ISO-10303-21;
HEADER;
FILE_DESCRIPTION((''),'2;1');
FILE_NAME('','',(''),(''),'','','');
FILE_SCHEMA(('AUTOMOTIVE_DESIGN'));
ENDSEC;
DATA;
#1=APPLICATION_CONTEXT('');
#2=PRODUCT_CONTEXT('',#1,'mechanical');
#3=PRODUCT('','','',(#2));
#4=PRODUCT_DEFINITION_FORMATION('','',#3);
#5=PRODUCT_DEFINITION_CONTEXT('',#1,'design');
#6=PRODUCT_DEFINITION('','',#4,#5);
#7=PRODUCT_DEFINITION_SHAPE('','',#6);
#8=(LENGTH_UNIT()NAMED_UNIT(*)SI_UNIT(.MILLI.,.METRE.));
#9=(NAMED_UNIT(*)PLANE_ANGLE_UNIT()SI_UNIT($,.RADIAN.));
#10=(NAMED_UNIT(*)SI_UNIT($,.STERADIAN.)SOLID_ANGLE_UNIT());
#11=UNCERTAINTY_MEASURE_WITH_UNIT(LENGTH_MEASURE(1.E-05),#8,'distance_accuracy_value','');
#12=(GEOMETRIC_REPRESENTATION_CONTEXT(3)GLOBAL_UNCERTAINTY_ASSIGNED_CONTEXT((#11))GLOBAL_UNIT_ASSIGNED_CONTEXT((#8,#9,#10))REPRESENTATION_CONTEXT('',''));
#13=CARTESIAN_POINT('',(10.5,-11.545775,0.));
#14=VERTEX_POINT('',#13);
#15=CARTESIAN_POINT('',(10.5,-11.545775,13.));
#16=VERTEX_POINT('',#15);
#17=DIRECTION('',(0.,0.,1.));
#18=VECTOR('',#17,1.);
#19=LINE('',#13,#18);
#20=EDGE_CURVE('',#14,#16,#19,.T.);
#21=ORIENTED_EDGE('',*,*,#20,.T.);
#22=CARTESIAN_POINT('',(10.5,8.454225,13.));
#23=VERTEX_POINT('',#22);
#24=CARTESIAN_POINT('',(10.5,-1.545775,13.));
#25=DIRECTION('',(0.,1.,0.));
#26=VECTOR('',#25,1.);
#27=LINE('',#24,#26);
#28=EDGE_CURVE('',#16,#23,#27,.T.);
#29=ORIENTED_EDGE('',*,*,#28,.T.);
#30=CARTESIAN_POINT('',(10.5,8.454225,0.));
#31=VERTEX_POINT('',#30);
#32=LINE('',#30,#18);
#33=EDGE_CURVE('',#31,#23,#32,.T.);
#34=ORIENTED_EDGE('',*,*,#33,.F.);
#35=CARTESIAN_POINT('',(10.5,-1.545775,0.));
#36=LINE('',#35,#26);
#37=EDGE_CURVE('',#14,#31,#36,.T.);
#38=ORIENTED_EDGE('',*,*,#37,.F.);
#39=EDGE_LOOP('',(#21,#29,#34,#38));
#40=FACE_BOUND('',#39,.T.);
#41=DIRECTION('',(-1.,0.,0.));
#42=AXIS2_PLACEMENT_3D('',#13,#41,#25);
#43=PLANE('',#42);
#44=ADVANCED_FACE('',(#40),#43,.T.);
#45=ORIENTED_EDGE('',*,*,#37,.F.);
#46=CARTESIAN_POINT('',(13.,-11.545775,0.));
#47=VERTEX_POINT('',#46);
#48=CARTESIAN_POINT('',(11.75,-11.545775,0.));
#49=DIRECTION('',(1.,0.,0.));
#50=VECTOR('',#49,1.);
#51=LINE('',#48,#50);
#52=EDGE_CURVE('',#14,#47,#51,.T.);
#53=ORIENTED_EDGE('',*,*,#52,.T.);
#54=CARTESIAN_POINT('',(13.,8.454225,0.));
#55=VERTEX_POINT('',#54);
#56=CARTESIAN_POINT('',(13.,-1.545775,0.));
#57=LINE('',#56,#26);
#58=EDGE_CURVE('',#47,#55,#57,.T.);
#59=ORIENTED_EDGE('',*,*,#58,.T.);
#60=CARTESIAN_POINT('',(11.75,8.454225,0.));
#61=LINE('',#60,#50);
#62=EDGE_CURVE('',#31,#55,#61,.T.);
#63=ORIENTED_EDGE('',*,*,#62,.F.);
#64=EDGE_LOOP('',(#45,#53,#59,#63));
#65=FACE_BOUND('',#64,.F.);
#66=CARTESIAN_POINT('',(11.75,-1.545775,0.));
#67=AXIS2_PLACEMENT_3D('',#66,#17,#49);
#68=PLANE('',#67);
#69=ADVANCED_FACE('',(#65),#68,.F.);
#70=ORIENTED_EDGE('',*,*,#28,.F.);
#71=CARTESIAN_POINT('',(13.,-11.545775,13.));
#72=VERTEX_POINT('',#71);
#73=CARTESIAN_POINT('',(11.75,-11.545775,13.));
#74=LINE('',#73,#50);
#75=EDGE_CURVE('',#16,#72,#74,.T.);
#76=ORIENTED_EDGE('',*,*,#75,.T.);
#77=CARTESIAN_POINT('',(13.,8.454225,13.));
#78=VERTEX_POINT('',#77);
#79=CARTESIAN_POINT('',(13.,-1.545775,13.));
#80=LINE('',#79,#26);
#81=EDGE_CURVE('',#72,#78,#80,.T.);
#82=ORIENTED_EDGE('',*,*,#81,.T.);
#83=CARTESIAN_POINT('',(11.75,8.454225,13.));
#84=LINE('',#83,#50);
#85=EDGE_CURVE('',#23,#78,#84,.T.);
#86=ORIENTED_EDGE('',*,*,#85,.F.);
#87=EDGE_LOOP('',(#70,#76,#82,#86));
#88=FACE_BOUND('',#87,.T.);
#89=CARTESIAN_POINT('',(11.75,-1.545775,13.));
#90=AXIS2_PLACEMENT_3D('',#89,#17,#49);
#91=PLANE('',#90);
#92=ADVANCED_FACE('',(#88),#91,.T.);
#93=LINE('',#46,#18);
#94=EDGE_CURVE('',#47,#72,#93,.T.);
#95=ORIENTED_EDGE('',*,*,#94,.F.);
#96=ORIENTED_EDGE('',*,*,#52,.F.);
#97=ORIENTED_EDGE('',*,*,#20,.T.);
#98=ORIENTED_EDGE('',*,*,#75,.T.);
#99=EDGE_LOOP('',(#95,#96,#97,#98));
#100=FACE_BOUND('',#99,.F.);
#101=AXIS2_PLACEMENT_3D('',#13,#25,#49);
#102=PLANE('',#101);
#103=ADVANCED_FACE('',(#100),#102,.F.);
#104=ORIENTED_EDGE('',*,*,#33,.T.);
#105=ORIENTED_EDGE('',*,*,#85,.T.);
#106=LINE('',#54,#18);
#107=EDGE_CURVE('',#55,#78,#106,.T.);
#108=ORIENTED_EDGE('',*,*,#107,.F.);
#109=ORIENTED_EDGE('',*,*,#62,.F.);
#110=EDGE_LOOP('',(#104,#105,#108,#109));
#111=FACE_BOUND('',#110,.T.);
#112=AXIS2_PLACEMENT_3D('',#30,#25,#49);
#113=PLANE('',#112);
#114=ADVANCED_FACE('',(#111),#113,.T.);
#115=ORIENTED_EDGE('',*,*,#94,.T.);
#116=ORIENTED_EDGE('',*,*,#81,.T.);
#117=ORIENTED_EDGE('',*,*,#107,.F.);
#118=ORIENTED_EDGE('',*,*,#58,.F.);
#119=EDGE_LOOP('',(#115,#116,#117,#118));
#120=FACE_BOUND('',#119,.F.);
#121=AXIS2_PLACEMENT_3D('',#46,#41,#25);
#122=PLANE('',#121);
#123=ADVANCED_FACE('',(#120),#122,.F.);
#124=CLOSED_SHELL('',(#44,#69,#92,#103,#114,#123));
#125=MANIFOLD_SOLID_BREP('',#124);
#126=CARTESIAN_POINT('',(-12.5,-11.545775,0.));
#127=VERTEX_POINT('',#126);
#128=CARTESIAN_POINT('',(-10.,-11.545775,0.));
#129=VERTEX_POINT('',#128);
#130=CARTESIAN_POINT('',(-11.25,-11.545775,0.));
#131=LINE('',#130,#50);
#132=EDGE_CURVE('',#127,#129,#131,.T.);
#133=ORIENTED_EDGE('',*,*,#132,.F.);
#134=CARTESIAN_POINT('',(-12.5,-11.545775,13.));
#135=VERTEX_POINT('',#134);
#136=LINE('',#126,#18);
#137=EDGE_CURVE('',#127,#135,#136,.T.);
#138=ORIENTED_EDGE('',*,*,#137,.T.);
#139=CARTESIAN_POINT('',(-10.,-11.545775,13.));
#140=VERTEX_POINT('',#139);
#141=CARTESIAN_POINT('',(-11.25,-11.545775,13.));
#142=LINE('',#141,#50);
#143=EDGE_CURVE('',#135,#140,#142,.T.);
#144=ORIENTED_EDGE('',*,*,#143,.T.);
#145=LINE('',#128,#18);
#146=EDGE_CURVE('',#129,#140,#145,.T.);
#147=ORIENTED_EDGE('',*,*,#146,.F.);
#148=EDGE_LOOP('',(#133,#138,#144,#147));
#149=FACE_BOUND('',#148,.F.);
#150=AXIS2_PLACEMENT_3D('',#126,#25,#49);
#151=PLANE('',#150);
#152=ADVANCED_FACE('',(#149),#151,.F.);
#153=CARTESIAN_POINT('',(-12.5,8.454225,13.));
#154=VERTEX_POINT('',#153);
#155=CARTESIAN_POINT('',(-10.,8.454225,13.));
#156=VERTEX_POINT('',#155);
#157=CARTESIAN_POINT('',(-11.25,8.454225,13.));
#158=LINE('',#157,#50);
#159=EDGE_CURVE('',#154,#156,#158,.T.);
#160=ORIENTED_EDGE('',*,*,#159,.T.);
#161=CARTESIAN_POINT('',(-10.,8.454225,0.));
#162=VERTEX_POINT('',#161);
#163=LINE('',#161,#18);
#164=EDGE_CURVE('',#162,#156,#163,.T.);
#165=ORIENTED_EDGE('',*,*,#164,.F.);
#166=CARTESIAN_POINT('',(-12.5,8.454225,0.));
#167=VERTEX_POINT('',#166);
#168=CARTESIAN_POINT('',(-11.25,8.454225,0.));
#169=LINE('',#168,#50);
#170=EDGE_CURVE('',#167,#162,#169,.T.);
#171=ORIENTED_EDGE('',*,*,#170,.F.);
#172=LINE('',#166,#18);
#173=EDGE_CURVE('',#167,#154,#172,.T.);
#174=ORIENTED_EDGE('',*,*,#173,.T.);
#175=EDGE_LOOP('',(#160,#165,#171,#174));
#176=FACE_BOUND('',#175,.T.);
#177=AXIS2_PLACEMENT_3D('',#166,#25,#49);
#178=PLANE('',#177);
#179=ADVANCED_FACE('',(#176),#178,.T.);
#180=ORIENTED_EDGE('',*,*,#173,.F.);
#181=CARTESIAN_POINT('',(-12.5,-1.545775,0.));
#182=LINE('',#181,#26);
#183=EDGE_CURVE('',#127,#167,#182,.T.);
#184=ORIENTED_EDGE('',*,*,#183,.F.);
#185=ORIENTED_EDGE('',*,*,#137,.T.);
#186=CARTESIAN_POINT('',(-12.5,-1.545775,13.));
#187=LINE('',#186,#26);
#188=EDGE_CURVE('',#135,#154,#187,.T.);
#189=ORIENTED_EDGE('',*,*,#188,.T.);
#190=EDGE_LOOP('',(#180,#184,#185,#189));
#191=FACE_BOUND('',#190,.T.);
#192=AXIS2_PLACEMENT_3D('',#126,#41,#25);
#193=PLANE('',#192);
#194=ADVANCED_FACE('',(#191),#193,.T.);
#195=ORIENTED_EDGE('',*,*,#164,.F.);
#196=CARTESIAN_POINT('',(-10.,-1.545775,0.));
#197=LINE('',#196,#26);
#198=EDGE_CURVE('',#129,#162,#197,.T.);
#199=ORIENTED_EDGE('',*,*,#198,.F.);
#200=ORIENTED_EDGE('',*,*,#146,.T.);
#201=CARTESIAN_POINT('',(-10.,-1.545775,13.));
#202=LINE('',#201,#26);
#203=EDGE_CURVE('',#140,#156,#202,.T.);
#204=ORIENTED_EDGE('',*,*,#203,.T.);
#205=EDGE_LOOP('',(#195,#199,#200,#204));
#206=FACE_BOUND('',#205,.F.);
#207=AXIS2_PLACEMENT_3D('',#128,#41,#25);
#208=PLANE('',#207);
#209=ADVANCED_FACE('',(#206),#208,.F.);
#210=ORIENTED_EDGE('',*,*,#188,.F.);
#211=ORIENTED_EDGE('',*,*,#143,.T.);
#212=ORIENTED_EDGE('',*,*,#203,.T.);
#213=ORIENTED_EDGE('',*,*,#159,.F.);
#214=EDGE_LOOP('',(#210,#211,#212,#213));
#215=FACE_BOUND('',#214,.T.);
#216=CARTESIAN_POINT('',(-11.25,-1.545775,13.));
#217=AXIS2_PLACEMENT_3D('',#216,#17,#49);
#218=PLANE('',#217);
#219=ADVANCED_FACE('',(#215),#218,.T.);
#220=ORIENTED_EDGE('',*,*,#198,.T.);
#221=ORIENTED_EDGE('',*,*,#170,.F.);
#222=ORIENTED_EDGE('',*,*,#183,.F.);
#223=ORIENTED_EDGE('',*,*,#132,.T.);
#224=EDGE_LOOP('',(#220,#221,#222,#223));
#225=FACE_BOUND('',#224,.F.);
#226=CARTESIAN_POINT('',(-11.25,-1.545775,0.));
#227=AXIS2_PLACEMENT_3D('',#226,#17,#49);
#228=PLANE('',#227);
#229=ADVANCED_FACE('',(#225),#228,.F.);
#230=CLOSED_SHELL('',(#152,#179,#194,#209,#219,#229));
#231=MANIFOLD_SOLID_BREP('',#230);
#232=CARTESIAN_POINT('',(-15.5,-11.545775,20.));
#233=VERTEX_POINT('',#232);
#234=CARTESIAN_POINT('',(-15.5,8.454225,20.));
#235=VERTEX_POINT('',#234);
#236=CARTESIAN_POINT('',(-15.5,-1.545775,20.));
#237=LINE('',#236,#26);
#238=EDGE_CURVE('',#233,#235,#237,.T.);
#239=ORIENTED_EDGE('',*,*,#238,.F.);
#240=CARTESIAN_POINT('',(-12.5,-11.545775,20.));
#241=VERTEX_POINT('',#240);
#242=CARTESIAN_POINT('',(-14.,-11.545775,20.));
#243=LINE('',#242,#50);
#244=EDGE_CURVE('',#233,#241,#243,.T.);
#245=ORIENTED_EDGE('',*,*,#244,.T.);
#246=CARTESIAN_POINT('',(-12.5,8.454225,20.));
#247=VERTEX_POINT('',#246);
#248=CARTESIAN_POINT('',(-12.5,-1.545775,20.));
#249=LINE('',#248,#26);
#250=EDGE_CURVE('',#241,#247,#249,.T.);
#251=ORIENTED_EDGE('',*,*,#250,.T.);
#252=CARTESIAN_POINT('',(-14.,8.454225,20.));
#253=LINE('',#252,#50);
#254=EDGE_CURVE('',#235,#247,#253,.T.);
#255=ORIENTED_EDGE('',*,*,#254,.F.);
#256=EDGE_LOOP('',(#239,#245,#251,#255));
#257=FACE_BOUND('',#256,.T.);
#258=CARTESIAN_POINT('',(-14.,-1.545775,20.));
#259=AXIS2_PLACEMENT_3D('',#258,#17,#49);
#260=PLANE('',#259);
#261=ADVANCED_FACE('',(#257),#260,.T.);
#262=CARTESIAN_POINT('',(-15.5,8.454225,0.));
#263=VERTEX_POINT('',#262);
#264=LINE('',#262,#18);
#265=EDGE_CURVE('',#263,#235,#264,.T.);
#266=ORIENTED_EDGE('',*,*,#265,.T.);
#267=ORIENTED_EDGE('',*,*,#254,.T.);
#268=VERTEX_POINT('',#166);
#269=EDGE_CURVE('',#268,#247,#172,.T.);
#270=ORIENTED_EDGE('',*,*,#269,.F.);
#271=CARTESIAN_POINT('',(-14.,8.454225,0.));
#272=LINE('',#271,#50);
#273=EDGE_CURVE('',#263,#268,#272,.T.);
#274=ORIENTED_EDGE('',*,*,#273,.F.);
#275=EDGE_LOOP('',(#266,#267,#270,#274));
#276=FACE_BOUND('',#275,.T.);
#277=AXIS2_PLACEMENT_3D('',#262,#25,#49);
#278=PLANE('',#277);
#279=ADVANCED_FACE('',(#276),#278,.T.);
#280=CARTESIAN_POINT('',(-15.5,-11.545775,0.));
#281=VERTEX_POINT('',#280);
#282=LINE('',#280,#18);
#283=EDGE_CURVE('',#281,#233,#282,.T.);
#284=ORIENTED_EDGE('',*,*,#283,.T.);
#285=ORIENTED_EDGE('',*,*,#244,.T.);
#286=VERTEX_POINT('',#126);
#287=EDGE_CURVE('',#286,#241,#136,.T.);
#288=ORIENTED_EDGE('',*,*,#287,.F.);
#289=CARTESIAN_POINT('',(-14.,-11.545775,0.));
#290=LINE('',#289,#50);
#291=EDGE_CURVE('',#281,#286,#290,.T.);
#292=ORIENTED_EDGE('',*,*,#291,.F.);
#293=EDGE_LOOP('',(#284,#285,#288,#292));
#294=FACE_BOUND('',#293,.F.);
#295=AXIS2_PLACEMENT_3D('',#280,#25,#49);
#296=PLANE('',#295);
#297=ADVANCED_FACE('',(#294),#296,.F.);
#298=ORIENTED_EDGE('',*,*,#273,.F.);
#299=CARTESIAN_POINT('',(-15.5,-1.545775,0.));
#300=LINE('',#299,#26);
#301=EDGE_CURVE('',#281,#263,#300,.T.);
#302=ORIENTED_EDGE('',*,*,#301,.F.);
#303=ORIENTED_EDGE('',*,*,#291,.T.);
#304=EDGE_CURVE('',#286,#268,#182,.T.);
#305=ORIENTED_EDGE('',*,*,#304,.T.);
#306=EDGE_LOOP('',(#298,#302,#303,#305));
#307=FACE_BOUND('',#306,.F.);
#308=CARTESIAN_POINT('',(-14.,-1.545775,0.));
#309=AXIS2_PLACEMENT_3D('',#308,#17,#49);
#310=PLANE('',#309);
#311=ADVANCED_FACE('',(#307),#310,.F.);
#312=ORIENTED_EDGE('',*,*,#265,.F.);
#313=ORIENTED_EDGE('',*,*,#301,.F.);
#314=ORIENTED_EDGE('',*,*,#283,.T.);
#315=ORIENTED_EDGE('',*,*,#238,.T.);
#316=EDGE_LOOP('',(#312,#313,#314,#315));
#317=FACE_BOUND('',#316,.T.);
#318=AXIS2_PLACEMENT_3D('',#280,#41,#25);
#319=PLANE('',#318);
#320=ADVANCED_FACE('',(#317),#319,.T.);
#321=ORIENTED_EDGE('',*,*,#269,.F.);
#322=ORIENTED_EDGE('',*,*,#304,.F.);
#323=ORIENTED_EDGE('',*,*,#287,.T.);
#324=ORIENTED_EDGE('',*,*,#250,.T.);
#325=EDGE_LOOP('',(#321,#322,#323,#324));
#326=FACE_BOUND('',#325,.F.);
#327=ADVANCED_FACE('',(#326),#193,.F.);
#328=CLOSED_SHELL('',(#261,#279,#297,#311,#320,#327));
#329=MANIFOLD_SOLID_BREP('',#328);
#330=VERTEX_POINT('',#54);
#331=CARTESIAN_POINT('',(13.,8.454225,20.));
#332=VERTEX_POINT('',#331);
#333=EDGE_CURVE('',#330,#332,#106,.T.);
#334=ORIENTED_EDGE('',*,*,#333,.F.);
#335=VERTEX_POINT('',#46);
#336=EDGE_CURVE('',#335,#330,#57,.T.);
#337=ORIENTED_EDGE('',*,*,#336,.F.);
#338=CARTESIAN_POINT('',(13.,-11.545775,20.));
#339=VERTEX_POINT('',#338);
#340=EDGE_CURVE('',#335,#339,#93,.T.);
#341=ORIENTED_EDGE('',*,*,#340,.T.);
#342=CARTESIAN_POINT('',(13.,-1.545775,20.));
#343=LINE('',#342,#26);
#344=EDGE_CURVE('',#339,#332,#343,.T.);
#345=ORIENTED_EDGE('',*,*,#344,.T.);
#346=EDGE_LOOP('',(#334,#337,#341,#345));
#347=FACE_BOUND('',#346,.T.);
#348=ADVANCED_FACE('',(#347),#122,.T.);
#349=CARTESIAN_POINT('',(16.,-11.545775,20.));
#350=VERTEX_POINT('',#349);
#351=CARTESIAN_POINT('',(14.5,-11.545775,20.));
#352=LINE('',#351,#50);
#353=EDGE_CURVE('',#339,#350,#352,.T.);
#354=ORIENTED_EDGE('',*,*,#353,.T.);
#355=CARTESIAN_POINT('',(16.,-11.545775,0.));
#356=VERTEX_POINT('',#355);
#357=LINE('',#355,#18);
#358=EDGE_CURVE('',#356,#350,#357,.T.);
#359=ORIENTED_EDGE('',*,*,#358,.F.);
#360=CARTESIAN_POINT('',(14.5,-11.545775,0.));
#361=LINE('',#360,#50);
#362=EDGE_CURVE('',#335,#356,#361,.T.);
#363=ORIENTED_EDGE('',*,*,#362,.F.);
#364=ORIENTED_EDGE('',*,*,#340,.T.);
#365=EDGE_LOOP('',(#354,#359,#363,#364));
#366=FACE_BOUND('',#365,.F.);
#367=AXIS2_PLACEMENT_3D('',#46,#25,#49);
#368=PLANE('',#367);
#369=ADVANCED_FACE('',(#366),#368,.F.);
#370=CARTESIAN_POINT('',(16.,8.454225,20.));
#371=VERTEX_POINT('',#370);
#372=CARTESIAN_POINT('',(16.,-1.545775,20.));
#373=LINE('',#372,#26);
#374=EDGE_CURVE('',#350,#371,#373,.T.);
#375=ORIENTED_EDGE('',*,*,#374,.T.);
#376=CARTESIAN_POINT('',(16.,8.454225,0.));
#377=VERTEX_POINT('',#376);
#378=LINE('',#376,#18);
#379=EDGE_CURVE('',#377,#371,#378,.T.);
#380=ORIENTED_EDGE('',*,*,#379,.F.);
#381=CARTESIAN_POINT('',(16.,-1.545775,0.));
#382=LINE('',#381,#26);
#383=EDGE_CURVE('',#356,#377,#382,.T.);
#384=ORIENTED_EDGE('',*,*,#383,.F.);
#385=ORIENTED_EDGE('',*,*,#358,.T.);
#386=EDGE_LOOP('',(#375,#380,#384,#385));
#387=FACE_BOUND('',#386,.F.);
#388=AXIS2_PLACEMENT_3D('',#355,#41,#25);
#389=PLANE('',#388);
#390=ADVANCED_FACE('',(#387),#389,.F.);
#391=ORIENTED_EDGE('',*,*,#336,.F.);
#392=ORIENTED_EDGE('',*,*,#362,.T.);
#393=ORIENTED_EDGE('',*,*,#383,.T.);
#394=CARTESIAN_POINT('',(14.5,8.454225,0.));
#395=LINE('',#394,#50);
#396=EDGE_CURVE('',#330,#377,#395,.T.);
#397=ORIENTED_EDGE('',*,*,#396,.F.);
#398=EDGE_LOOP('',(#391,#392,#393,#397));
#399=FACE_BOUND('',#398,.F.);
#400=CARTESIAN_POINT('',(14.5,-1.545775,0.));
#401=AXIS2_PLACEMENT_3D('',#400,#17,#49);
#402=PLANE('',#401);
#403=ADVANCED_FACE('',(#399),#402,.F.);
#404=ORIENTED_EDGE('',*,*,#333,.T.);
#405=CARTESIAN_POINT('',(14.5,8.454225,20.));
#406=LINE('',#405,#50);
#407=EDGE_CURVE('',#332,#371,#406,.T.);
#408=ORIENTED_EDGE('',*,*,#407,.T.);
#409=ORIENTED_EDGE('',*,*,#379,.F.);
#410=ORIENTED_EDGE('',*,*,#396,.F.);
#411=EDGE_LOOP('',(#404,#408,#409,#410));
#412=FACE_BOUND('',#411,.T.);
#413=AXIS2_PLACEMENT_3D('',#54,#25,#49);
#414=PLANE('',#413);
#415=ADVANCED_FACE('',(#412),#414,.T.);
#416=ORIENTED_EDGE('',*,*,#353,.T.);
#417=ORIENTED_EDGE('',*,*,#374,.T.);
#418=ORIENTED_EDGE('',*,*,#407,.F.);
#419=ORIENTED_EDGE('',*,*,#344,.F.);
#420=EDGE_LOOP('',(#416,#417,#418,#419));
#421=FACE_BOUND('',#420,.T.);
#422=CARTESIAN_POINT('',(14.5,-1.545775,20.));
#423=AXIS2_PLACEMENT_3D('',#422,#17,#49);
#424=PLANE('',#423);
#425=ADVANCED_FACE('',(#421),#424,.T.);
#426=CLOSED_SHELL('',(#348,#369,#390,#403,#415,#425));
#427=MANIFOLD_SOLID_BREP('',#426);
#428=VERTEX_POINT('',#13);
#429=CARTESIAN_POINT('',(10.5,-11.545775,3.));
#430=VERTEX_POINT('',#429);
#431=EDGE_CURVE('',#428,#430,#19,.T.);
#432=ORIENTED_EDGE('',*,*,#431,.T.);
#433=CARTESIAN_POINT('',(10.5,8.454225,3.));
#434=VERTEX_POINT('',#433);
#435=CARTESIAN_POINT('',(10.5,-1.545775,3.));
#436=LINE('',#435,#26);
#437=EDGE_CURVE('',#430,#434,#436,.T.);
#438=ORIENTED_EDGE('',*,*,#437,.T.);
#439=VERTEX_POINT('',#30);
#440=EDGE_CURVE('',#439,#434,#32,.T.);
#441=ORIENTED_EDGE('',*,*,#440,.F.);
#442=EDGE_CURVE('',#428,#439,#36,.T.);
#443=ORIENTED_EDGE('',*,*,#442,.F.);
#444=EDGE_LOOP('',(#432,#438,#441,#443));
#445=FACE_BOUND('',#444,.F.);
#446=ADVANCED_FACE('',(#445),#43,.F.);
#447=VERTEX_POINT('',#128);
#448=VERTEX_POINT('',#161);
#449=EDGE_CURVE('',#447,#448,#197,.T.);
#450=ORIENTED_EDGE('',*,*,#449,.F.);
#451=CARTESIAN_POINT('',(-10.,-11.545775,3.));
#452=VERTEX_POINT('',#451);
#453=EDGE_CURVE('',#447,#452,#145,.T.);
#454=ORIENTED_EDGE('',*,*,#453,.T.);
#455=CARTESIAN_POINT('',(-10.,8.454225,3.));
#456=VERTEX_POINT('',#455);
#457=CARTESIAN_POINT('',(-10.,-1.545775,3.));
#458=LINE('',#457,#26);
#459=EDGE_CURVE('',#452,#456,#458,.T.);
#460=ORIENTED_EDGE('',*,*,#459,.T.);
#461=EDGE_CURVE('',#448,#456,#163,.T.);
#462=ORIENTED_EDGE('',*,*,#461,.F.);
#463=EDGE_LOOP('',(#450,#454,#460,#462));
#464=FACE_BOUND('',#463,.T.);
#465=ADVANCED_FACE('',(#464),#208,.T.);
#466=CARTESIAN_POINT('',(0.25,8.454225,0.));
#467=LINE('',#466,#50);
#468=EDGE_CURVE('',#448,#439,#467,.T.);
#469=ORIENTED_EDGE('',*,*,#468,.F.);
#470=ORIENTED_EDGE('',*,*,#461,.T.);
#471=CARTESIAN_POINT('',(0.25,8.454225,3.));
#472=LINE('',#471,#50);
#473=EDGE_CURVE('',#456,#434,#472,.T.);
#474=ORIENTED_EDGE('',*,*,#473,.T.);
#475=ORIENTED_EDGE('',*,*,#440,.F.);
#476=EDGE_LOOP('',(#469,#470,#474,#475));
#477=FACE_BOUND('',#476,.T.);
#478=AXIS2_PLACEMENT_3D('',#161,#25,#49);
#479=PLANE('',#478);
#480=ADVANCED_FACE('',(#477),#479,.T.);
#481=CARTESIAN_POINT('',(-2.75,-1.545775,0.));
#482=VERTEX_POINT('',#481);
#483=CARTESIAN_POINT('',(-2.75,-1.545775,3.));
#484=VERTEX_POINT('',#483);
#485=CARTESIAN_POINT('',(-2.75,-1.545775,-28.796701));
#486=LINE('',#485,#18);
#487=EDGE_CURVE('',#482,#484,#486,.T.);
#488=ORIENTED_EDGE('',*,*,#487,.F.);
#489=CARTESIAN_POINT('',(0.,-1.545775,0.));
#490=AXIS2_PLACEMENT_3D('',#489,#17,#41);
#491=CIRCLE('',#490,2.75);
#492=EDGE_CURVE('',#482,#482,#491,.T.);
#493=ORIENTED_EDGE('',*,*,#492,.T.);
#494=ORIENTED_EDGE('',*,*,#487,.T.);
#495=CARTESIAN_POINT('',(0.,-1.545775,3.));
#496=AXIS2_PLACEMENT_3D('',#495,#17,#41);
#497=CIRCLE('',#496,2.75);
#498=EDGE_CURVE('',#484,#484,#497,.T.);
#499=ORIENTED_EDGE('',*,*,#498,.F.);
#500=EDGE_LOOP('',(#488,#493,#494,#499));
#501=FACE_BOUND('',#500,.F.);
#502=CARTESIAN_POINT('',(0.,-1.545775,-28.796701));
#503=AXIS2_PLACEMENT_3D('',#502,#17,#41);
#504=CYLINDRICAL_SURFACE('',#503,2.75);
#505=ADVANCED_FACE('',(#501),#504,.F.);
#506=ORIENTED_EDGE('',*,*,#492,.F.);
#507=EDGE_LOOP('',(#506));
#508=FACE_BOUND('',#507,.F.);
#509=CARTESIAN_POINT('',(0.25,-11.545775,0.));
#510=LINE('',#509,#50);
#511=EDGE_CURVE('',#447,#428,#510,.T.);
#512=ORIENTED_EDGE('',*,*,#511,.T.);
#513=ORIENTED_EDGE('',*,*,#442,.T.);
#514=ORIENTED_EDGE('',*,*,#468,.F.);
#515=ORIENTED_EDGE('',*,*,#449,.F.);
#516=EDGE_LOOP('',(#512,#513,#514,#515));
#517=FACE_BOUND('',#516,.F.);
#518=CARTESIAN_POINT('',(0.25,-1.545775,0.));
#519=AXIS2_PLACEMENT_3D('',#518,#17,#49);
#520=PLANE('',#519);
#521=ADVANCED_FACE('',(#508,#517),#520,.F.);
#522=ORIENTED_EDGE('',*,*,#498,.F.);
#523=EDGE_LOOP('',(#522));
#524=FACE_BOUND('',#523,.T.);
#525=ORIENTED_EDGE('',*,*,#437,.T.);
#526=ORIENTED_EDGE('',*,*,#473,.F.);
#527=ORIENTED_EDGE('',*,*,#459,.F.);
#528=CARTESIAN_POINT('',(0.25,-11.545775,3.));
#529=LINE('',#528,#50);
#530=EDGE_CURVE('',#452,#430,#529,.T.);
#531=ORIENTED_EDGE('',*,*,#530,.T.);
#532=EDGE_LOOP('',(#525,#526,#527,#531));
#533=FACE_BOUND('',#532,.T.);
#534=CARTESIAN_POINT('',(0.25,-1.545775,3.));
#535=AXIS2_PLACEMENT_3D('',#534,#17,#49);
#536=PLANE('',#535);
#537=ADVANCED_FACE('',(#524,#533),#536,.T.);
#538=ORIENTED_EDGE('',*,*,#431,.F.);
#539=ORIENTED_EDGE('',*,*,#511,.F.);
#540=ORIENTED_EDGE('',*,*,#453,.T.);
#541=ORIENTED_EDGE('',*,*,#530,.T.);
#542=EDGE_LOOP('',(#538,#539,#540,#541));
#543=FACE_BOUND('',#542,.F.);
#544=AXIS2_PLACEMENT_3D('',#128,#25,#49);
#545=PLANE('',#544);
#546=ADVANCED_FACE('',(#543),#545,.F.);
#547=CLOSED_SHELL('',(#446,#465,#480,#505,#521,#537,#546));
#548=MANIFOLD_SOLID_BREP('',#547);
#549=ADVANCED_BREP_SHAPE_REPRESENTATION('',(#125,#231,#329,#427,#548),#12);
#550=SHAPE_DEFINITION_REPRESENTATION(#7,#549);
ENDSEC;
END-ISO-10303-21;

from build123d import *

# Parameters (mm, degrees)
F0_W     = 20.5
F0_H     = 20
F1_DEPTH = 3
F0_W_2   = 3
F2_DEPTH = 20
F3_D     = 5.5
F0_W_3   = 2.5
F4_DEPTH = 13


# Not quite as in the source:
# - a feature names something its author has since deleted; it is built from what else it names


with BuildPart() as f1:
    # F0 (on Top) → F1 (new body)
    with BuildSketch(Plane.XY):
        with Locations((0.2499998137, -1.5457747273)):
            Rectangle(F0_W, F0_H)
    extrude(amount=F1_DEPTH)

    # F3 (through all)
    with Locations(Plane(origin=(0, 0, 0), x_dir=(1, 0, 0), z_dir=(0, 0, -1))):
        with Locations((0, 1.5457747273)):
            Hole(F3_D / 2)


with BuildPart() as f2:
    # F0 (on Top) → F2 (new body)
    with BuildSketch(Plane.XY):
        with Locations((14.4999998137, -1.5457747273)):
            Rectangle(F0_W_2, F0_H)
    extrude(amount=F2_DEPTH)


with BuildPart() as f2b:
    # F0 (on Top) → F2, piece 2 (new body)
    with BuildSketch(Plane.XY):
        with Locations((-14.0000001863, -1.5457747273)):
            Rectangle(F0_W_2, F0_H)
    extrude(amount=F2_DEPTH)


with BuildPart() as f4:
    # F0 (on Top) → F4 (new body)
    with BuildSketch(Plane.XY):
        with Locations((11.7499998137, -1.5457747273)):
            Rectangle(F0_W_3, F0_H)
    extrude(amount=F4_DEPTH)


with BuildPart() as f4b:
    # F0 (on Top) → F4, piece 2 (new body)
    with BuildSketch(Plane.XY):
        with Locations((-11.2500001863, -1.5457747273)):
            Rectangle(F0_W_3, F0_H)
    extrude(amount=F4_DEPTH)


solid = Compound([f1.part, f2.part, f2b.part, f4.part, f4b.part])
